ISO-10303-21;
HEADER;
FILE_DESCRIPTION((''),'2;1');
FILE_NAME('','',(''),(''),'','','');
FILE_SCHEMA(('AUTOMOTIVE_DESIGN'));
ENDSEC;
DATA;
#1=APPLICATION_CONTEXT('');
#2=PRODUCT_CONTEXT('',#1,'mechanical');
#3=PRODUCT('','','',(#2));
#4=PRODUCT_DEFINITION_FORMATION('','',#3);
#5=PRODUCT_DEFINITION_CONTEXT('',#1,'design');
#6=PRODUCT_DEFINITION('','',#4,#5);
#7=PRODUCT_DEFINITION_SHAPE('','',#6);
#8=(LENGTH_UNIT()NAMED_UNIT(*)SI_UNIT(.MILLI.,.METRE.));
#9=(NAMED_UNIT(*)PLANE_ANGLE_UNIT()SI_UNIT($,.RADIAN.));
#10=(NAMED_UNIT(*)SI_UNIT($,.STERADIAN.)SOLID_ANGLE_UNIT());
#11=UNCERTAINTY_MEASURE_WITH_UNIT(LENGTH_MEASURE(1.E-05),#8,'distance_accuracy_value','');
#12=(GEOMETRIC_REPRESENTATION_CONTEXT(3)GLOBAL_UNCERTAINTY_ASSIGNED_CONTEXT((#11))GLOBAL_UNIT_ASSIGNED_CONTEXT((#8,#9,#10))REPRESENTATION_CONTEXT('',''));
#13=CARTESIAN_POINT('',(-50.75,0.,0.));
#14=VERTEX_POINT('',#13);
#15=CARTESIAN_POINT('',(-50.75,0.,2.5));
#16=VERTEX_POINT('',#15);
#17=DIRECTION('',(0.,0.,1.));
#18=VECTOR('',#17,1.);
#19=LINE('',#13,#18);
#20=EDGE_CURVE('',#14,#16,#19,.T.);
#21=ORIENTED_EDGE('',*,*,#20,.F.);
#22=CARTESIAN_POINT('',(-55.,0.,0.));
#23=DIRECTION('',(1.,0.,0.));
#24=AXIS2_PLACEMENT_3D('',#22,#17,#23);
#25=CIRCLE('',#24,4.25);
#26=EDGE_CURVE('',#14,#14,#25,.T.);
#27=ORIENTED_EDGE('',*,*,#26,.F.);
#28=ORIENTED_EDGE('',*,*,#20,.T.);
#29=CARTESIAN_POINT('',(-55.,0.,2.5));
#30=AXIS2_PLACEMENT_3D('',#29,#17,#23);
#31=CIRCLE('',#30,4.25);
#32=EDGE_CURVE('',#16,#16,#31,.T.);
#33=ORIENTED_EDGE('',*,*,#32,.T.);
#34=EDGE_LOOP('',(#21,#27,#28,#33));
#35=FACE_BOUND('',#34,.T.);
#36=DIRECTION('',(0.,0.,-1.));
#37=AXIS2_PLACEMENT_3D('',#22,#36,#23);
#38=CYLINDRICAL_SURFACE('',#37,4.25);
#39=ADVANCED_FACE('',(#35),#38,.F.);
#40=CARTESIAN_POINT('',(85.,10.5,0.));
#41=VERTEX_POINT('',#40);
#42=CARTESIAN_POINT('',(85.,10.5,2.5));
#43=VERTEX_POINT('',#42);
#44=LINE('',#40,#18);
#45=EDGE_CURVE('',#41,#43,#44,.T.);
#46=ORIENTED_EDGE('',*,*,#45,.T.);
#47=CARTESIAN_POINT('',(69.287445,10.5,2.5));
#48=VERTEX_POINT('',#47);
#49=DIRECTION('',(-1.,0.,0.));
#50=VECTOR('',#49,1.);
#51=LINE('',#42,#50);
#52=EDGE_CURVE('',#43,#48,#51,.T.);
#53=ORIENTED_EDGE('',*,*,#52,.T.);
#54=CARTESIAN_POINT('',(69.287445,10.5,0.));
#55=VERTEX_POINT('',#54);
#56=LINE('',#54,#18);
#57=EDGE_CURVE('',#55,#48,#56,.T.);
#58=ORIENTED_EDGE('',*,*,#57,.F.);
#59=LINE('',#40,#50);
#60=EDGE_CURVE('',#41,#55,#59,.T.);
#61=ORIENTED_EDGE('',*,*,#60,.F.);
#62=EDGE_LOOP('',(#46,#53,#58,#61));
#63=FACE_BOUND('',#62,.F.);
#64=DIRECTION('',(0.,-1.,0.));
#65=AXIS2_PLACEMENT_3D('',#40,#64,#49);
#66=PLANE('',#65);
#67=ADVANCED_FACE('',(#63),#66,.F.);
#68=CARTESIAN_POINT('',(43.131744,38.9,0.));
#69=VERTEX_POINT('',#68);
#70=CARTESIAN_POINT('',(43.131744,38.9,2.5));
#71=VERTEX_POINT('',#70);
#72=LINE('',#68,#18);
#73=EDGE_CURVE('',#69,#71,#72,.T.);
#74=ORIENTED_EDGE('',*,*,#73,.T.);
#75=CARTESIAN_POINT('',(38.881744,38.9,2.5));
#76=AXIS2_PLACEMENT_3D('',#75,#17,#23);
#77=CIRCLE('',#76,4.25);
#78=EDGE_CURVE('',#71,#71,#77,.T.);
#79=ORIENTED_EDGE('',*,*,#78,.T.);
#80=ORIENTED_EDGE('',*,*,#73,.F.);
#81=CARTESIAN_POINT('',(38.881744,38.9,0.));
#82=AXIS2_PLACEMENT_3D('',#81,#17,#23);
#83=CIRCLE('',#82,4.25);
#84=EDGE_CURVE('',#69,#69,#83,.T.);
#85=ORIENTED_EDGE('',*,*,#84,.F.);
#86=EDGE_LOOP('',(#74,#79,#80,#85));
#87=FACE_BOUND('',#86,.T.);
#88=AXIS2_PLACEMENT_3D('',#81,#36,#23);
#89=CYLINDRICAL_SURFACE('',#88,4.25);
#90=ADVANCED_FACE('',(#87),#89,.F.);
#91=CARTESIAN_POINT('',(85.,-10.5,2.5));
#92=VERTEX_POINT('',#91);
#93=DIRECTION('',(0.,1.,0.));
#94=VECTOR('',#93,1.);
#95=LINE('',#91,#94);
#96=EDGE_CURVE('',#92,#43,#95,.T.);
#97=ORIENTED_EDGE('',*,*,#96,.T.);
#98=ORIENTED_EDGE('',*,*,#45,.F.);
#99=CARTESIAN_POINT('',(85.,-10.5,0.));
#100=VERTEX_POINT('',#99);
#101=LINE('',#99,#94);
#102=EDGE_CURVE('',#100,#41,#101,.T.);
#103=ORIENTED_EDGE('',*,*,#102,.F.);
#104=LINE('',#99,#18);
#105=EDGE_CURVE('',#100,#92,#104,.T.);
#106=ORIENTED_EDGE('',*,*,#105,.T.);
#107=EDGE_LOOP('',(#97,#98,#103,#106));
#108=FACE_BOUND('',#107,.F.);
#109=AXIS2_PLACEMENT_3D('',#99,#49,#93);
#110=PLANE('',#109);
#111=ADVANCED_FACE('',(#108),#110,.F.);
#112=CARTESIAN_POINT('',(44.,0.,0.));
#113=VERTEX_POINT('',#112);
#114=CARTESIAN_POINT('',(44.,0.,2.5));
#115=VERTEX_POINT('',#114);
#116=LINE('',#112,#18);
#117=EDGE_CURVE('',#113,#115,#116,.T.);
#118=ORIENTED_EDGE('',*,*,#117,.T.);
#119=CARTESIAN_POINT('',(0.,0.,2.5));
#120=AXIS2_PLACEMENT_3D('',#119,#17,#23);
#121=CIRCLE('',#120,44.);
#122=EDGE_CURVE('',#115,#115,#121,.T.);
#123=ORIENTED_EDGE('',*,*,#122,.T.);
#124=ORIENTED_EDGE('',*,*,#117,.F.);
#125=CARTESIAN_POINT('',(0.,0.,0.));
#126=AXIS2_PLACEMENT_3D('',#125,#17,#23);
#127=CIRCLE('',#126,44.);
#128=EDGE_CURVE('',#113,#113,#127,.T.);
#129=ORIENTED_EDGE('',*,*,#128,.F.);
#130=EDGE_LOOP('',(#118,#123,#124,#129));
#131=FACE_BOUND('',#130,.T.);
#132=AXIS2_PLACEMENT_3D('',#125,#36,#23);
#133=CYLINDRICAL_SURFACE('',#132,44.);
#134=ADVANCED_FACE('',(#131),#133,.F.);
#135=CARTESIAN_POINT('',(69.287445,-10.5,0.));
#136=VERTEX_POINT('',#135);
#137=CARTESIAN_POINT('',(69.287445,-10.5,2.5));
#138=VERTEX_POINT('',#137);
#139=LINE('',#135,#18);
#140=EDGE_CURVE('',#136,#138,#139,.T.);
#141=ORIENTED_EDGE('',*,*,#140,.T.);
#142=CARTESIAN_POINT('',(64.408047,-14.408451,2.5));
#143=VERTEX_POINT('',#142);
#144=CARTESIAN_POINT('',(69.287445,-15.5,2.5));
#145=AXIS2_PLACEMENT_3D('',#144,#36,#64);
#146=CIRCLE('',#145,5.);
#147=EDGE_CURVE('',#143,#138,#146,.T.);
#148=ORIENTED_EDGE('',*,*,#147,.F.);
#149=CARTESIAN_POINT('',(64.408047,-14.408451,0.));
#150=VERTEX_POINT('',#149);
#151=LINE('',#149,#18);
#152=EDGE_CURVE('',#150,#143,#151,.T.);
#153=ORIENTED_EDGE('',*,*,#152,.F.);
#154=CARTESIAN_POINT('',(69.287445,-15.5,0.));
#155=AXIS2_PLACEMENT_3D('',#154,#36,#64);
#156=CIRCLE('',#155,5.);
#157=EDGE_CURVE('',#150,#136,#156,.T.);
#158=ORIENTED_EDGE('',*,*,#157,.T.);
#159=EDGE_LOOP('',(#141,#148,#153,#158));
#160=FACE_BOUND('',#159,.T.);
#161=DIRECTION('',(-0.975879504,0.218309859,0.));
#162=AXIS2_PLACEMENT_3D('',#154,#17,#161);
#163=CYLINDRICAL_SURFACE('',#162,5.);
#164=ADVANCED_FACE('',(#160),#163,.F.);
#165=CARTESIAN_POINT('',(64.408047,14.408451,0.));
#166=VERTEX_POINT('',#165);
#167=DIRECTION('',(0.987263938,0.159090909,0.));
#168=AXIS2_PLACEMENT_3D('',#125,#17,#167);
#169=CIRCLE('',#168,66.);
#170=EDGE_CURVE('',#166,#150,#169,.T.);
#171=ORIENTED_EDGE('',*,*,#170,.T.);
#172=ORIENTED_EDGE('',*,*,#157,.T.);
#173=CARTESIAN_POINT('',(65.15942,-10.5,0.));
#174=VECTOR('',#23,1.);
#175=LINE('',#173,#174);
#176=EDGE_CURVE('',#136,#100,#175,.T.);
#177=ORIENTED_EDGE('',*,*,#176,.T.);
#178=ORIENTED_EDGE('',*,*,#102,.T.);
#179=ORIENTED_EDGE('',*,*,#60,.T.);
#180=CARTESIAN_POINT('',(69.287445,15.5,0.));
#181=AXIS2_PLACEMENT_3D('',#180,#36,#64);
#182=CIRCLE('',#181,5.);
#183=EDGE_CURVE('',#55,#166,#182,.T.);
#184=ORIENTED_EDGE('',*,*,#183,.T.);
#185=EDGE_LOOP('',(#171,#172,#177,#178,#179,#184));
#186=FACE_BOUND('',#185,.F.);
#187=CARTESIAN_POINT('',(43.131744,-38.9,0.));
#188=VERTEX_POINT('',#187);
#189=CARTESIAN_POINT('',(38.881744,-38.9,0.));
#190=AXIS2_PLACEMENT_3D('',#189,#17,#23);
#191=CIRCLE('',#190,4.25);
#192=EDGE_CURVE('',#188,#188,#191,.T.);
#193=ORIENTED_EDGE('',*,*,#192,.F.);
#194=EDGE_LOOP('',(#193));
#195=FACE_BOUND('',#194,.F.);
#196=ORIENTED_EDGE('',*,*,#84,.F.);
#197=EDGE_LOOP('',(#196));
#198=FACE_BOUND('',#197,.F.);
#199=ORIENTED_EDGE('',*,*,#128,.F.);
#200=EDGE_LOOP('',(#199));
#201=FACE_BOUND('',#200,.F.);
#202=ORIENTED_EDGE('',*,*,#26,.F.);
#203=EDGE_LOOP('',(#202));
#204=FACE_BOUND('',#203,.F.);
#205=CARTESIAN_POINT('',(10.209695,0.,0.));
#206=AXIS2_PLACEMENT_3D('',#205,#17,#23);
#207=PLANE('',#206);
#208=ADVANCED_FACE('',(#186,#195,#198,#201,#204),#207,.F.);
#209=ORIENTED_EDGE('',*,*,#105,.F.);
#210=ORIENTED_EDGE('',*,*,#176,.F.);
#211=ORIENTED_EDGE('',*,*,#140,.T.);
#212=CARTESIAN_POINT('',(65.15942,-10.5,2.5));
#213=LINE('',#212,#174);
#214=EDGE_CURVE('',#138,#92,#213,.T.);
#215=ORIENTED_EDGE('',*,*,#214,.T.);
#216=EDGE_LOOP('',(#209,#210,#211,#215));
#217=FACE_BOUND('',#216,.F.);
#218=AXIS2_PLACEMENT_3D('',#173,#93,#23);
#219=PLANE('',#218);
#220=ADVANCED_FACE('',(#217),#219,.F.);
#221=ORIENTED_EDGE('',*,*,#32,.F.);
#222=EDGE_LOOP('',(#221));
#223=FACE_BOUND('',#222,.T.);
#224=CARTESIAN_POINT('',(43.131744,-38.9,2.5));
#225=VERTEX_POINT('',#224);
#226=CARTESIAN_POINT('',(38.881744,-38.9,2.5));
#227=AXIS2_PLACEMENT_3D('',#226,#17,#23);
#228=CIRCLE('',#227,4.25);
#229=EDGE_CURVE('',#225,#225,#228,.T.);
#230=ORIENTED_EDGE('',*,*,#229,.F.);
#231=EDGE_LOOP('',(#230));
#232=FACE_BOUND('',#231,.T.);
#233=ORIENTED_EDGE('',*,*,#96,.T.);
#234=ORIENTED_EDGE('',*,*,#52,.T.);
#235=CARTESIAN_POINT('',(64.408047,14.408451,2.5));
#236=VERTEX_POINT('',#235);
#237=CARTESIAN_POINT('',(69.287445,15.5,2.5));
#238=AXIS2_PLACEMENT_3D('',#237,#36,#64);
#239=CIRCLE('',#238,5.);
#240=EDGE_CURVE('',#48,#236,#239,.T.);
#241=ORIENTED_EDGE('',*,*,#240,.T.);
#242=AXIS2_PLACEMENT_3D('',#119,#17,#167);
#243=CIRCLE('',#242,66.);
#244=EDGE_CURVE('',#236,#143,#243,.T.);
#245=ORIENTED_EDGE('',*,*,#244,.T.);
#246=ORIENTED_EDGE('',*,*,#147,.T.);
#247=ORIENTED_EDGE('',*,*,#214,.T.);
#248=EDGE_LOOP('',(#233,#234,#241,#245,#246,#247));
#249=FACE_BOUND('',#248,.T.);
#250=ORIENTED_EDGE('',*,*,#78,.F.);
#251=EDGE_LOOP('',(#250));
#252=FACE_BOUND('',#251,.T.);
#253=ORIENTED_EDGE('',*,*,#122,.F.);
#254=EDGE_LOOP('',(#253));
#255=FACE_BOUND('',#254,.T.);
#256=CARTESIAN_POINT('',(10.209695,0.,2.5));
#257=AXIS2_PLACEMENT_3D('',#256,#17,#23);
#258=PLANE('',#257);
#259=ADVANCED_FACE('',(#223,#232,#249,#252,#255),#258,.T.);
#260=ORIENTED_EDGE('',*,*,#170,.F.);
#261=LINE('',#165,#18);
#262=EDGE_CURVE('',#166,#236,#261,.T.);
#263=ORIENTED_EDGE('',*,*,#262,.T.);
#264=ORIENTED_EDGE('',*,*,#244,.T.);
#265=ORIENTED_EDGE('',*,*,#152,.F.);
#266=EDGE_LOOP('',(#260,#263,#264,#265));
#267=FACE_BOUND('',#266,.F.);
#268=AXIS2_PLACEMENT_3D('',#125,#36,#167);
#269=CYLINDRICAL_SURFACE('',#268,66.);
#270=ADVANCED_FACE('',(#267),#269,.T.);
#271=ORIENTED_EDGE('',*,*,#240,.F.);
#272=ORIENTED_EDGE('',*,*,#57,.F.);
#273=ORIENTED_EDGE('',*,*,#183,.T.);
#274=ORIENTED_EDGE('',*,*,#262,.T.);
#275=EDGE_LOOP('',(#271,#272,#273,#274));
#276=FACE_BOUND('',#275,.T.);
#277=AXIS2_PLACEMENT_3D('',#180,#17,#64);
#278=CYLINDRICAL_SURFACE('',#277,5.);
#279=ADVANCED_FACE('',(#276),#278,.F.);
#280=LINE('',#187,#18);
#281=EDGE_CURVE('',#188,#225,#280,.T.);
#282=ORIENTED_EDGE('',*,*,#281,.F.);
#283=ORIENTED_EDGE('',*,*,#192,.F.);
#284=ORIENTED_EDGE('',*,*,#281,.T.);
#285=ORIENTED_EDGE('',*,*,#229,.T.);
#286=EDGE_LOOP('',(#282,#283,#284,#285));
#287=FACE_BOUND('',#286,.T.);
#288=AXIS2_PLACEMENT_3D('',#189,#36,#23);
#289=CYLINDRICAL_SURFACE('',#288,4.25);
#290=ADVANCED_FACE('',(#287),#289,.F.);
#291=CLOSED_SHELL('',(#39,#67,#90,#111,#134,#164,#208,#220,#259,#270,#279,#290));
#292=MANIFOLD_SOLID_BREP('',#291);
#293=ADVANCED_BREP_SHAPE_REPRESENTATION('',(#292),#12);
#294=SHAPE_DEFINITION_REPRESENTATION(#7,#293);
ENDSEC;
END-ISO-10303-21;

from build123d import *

# Parameters (mm, degrees)
F0_R     = 4.25
F0_R_2   = 44
F1_DEPTH = 2.5
F2_R     = 5


with BuildPart() as f1:
    # F0 (on Top) → F1 (new body)
    with BuildSketch(Plane.XY):
        with BuildLine():
            Line((85, 10.5), (65.1594198869, 10.5))
            ThreePointArc((65.1594198869, 10.5), (-66, 0), (65.1594198869, -10.5))
            Line((65.1594198869, -10.5), (85, -10.5))
            Line((85, -10.5), (85, 10.5))
        make_face()
        with Locations((38.8817437881, -38.9)):
            Circle(F0_R, mode=Mode.SUBTRACT)
        with Locations((-55, 0)):
            Circle(F0_R, mode=Mode.SUBTRACT)
        Circle(F0_R_2, mode=Mode.SUBTRACT)
        with Locations((38.8817437881, 38.9)):
            Circle(F0_R, mode=Mode.SUBTRACT)
    extrude(amount=F1_DEPTH)

    # F2
    f2_edges = [f1.edges().sort_by_distance(p)[0] for p in [
        (65.15942, 10.5, 1.25),
        (65.15942, -10.5, 1.25),
    ]]
    fillet(f2_edges, radius=F2_R)


solid = f1.part
